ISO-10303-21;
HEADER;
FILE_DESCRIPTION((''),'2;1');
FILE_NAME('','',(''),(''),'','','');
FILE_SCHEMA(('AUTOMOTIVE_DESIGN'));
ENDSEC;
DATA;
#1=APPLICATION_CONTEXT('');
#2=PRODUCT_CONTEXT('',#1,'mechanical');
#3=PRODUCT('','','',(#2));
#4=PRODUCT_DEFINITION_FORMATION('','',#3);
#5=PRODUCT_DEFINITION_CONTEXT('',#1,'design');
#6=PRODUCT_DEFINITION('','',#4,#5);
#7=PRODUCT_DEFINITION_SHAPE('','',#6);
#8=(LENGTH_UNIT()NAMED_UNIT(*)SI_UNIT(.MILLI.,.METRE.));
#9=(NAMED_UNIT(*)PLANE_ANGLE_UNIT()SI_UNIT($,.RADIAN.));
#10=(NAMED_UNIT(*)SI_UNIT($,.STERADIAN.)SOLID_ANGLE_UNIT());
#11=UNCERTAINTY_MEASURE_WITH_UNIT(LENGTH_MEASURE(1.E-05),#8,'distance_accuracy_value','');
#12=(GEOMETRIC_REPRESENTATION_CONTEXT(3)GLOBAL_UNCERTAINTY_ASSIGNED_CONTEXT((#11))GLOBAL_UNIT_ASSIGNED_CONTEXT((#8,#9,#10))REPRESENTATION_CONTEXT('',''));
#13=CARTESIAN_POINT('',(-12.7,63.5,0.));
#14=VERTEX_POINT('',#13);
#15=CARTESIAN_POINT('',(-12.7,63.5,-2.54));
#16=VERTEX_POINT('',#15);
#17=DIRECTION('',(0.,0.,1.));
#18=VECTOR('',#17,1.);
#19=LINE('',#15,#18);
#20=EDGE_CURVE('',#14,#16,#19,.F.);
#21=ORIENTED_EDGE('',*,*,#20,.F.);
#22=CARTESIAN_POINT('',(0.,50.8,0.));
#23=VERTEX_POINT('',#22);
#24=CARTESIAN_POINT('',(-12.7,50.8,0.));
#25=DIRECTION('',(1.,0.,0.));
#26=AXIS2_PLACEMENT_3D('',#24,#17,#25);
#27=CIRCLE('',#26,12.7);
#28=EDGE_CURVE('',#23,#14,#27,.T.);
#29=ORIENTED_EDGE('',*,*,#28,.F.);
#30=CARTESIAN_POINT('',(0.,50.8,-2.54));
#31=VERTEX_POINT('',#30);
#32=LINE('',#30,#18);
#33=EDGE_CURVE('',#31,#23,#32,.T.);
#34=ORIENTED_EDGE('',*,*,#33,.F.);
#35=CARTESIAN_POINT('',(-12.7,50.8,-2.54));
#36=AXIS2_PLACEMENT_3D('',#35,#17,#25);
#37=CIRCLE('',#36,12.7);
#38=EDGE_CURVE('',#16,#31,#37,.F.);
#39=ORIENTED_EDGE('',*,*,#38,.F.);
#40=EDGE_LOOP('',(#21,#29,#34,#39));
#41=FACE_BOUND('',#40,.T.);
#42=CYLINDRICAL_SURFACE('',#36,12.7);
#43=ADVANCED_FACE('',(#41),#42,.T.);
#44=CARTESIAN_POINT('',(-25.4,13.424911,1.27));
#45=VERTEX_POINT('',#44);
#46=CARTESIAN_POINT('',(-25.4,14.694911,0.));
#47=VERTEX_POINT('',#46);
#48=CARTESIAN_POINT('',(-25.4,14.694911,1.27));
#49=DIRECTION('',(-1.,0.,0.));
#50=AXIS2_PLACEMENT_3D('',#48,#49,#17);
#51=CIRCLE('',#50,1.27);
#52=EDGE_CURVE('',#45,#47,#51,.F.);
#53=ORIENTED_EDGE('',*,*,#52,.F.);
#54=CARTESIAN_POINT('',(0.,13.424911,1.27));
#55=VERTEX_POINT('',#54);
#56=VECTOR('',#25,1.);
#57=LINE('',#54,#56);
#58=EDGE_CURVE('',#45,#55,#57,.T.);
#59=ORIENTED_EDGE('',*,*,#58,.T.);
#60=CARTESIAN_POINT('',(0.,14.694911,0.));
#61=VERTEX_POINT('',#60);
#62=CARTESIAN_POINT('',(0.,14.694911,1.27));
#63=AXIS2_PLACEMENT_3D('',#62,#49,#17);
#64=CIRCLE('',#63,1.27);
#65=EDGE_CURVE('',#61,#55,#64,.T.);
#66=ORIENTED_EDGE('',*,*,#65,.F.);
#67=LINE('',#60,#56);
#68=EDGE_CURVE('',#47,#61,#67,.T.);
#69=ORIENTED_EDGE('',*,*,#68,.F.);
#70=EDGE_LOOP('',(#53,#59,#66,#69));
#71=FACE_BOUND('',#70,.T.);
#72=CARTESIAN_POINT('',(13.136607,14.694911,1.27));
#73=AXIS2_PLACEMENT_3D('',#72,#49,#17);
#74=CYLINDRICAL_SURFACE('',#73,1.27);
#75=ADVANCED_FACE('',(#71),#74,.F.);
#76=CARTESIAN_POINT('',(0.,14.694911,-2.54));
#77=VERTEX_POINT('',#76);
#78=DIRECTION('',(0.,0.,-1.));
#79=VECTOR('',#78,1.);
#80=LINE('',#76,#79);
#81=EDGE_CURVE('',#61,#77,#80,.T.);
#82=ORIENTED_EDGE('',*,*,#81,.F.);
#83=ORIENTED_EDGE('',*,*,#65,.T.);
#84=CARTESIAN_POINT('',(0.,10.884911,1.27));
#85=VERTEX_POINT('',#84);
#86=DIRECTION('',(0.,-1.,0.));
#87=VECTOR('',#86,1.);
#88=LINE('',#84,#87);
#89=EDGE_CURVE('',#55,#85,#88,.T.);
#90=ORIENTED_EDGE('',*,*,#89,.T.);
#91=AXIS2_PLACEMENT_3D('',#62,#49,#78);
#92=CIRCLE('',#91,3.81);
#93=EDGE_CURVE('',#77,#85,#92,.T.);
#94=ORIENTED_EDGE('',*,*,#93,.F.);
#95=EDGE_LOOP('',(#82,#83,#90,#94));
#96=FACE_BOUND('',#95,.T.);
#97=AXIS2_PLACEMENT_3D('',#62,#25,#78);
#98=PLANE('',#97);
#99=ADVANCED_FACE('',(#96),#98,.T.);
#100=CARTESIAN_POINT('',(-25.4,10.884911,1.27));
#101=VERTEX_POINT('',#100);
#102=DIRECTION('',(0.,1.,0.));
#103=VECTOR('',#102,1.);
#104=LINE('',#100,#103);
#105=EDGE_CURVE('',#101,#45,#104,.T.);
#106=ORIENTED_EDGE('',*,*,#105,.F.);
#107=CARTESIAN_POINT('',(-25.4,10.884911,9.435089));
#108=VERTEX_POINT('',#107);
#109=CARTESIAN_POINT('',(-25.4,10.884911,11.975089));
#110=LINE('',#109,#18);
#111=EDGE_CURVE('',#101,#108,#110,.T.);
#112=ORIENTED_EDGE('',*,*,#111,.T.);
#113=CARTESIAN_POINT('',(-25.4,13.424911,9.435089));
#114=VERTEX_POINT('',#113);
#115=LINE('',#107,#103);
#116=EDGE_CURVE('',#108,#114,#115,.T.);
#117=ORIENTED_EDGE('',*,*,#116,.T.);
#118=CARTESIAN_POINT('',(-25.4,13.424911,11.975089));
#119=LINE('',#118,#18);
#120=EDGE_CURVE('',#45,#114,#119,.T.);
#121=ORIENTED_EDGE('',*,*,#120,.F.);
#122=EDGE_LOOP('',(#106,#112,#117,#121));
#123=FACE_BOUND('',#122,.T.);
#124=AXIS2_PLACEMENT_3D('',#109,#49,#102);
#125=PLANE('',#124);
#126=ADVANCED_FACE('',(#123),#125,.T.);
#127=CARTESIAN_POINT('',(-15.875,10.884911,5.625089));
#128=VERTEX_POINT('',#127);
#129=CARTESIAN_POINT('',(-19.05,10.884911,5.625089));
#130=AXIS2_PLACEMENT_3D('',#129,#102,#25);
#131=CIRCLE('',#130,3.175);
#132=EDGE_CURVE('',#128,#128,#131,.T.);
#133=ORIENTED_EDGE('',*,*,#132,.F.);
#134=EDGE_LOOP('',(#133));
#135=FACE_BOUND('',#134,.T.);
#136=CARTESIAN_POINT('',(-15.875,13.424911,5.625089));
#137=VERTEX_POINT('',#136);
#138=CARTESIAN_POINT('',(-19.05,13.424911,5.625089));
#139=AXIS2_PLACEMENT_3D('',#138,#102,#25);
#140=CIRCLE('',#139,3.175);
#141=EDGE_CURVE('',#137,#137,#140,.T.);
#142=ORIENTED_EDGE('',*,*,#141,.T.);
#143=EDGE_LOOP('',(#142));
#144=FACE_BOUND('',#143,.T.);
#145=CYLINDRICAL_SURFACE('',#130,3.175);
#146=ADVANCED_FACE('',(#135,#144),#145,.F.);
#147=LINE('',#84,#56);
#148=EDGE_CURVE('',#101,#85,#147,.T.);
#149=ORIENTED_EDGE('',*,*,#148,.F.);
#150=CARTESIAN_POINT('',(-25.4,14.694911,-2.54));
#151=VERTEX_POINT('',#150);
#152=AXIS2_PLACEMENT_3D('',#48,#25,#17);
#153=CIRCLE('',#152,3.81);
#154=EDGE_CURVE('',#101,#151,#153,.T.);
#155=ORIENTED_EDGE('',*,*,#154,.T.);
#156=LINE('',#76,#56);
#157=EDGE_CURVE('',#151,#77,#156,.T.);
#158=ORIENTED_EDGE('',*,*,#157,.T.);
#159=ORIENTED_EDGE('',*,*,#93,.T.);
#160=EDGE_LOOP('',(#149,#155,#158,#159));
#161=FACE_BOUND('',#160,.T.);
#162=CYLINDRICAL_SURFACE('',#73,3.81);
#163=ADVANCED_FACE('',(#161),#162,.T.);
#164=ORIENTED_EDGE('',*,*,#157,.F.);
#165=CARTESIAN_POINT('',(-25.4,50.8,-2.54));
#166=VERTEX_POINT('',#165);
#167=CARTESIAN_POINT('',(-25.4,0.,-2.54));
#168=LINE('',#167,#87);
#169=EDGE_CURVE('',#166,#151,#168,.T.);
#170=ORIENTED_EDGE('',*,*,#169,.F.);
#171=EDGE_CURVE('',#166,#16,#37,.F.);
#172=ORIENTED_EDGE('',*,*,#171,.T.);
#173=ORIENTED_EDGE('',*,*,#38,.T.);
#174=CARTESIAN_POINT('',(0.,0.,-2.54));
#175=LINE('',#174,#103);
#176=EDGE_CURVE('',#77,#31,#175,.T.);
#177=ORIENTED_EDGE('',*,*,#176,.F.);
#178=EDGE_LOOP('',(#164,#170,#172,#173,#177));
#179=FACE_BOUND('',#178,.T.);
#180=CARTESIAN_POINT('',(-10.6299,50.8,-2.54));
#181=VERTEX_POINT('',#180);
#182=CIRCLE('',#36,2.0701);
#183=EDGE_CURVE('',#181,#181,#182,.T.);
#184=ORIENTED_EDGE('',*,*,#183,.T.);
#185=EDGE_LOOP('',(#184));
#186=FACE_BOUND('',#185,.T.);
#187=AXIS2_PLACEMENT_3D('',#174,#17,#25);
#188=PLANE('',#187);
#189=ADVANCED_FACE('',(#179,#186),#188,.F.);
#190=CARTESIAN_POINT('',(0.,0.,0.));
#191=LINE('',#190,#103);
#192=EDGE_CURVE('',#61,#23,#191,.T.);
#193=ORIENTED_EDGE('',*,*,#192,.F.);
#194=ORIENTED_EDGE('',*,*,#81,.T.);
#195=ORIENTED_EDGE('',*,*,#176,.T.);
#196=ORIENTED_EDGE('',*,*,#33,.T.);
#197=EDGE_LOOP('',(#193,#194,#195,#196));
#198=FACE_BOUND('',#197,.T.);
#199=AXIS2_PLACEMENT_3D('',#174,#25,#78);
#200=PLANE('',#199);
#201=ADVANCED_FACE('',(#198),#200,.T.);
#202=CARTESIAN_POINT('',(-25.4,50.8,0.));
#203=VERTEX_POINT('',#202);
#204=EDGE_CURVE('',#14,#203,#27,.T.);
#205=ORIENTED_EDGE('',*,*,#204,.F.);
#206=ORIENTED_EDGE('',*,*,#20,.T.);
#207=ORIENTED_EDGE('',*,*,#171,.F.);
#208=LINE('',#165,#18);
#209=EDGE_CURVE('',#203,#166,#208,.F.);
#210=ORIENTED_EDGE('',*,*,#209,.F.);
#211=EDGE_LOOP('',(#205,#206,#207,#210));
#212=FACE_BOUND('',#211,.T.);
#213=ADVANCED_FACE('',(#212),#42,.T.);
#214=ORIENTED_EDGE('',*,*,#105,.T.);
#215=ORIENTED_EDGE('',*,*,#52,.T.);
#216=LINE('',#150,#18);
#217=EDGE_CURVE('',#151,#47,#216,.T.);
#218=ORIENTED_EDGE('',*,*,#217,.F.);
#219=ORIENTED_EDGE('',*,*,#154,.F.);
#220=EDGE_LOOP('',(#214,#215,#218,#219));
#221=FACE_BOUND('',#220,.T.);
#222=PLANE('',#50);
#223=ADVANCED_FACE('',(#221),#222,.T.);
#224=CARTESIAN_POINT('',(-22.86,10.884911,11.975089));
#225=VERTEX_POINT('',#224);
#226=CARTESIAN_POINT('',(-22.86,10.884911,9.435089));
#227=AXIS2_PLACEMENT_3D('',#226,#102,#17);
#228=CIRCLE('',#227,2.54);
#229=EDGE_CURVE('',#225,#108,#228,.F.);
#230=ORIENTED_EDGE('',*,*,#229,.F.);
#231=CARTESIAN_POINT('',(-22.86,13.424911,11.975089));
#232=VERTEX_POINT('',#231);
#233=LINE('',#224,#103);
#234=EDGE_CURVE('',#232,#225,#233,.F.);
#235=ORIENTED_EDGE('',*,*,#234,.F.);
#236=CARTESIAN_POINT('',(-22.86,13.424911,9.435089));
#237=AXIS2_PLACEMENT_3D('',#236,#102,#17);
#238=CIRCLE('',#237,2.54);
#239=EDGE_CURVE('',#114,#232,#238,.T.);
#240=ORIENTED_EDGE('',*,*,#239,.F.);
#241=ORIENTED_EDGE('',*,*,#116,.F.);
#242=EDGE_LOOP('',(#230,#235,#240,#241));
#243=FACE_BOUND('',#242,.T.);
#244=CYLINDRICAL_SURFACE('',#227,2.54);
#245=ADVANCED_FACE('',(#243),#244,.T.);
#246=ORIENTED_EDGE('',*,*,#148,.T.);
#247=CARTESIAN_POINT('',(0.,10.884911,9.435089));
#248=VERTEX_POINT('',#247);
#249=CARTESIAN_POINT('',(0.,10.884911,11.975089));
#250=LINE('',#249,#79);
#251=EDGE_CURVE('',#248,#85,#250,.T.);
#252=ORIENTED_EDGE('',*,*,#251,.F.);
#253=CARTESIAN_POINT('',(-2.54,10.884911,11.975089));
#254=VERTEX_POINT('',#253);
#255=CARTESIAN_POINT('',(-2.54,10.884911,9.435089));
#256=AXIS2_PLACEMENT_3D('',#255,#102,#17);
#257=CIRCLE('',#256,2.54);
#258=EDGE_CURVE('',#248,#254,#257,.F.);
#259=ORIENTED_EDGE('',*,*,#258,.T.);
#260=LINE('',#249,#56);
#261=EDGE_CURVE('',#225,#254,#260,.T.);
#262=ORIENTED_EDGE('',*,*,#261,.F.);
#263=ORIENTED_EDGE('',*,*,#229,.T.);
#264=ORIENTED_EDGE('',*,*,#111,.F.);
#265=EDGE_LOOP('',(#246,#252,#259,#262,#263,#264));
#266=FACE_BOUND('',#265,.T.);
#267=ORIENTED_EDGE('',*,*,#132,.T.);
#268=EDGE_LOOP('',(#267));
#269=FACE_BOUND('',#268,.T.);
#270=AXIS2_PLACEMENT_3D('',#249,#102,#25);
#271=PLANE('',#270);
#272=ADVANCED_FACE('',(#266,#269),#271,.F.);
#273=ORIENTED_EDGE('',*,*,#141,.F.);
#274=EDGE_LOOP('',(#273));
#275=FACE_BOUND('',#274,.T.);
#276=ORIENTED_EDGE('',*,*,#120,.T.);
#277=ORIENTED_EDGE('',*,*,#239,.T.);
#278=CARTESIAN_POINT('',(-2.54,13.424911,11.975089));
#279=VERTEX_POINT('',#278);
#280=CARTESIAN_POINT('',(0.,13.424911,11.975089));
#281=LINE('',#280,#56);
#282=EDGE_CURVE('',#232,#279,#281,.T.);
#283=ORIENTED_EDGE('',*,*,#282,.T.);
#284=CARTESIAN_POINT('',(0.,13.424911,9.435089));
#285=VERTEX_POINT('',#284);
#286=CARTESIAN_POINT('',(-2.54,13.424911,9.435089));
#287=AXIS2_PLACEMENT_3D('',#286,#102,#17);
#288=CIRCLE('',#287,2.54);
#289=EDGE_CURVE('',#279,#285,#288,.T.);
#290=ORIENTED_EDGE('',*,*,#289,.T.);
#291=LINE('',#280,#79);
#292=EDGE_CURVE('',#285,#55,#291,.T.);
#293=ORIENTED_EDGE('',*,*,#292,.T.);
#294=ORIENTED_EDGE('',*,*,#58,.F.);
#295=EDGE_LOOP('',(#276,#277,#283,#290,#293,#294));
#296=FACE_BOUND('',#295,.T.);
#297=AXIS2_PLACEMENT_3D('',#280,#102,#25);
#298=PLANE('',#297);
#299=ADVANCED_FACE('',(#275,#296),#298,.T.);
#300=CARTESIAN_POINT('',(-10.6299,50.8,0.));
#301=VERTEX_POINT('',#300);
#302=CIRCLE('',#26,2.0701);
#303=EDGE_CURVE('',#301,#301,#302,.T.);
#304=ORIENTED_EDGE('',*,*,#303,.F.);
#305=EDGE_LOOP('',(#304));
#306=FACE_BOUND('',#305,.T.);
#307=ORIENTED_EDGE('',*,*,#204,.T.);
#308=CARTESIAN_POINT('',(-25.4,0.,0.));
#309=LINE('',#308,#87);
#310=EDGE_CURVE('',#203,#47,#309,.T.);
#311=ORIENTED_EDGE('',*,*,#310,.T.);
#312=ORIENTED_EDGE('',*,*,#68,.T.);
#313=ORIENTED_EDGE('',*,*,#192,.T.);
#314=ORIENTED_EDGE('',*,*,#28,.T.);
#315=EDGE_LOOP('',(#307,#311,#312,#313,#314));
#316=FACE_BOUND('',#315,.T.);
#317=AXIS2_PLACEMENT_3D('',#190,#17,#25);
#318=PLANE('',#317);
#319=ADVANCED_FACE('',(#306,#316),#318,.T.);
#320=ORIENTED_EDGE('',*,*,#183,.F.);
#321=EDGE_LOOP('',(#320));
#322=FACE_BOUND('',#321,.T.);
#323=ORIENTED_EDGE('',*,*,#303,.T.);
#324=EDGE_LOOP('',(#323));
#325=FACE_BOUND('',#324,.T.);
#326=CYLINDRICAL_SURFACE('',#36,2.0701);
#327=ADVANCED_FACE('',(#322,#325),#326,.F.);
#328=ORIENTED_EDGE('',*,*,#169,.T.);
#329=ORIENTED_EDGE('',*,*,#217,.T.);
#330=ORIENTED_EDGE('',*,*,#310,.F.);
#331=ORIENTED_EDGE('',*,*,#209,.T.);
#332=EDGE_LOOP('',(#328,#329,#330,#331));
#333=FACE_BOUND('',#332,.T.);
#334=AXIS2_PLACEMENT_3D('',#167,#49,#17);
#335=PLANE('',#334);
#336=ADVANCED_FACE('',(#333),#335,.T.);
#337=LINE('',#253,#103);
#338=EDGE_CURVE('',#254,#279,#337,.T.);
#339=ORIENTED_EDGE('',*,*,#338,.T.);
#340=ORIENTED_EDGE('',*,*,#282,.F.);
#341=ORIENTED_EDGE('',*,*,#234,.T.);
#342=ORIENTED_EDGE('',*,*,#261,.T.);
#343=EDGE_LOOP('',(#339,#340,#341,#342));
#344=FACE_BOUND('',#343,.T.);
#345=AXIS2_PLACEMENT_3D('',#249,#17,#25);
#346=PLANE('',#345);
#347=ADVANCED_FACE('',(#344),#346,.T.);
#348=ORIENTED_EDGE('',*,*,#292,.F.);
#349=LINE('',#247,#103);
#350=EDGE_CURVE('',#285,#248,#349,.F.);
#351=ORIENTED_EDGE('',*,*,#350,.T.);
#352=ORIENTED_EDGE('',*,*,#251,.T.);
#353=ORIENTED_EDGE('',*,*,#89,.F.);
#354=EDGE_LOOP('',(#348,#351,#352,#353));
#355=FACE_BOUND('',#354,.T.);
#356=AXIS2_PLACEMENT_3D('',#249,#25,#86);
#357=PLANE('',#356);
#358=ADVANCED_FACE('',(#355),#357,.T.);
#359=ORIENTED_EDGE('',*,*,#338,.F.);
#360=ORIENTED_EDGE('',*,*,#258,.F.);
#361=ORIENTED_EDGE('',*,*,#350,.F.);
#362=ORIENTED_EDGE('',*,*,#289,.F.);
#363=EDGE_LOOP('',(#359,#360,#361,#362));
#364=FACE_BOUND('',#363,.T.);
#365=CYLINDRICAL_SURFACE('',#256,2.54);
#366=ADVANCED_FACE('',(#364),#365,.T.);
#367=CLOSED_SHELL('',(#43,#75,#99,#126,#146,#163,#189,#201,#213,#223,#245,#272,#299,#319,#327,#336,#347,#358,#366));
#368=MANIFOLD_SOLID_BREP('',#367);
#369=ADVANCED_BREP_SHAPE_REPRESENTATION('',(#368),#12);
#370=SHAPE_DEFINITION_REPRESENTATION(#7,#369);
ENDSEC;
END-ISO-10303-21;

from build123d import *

# Parameters (mm, degrees)
SKETCH1_W                  = 25.4
SKETCH1_H                  = 63.5
SKETCH1_R                  = 2.0701
SKETCH1_R_2                = 3.175
BASE_FLANGE1_DEPTH         = 2.54
SKETCHED_START             = -25.4
SKETCHED_BEND1_DEPTH       = 25.4
SKETCHED_START_2           = -15.8749999
SKETCHED_BEND1_2_DEPTH     = 15.8749999
SKETCHED_BEND1_3_DEPTH     = 3.1749999
SKETCHED_START_3           = -22.2250001
SKETCHED_BEND1_4_DEPTH     = 6.3500002
SKETCHED_START_4           = 10.884911335
SKETCHED_BEND1_5_OUTLINE_R = 3.175
SKETCHED_BEND1_5_DEPTH     = 2.54
FILLET1_R                  = 12.7
FILLET2_R                  = 2.54


with BuildPart() as part:
    # Base-Flange1: sheet metal written as solids
    # Sketch1 → Base-Flange1 (new body)
    with BuildSketch(Plane.XY):
        with Locations((-12.7, 31.75)):
            Rectangle(SKETCH1_W, SKETCH1_H)
        with Locations((-12.7, 50.8)):
            Circle(SKETCH1_R, mode=Mode.SUBTRACT)
        with Locations((-19.05, 6.35)):
            Circle(SKETCH1_R_2, mode=Mode.SUBTRACT)
    extrude(amount=-BASE_FLANGE1_DEPTH)

    # Sketched Bend1: read off the stored shape, not the designer's step
    # Sketched Bend1 outline → Sketched Bend1 (cut)
    with BuildSketch(Plane.YZ.offset(SKETCHED_START)):
        with BuildLine():
            ThreePointArc((14.694911335, -2.54), (12.49520681, -1.840851973), (11.102808887, 0))
            Line((11.102808887, 0), (0, 0))
            Line((0, 0), (0, -2.54))
            Line((0, -2.54), (14.694911335, -2.54))
        make_face()
    extrude(amount=SKETCHED_BEND1_DEPTH, mode=Mode.SUBTRACT)

    # Sketched Bend1 2 outline → Sketched Bend1 2 (add)
    with BuildSketch(Plane.YZ.offset(SKETCHED_START_2)):
        with BuildLine():
            Line((10.884911335, 11.975088665), (10.884911335, 1.27))
            ThreePointArc((10.884911335, 1.27), (10.939780823, 0.625721461), (11.102808887, 0))
            Line((11.102808887, 0), (14.694911335, 0))
            ThreePointArc((14.694911335, 0), (13.796885723, 0.371974388), (13.424911335, 1.27))
            Line((13.424911335, 1.27), (13.424911335, 11.975088665))
            Line((13.424911335, 11.975088665), (10.884911335, 11.975088665))
        make_face()
    extrude(amount=SKETCHED_BEND1_2_DEPTH)

    # Sketched Bend1 3 outline → Sketched Bend1 3 (add)
    with BuildSketch(Plane.YZ.offset(SKETCHED_START)):
        with BuildLine():
            Line((10.884911335, 11.975088665), (10.884911335, 1.27))
            ThreePointArc((10.884911335, 1.27), (10.939780823, 0.625721461), (11.102808887, 0))
            Line((11.102808887, 0), (14.694911335, 0))
            ThreePointArc((14.694911335, 0), (13.796885723, 0.371974388), (13.424911335, 1.27))
            Line((13.424911335, 1.27), (13.424911335, 11.975088665))
            Line((13.424911335, 11.975088665), (10.884911335, 11.975088665))
        make_face()
    extrude(amount=SKETCHED_BEND1_3_DEPTH)

    # Sketched Bend1 4 outline → Sketched Bend1 4 (add)
    with BuildSketch(Plane.YZ.offset(SKETCHED_START_3)):
        with BuildLine():
            Line((10.884911335, 11.975088665), (10.884911335, 1.27))
            ThreePointArc((10.884911335, 1.27), (10.939780823, 0.625721461), (11.102808887, 0))
            Line((11.102808887, 0), (14.694911335, 0))
            ThreePointArc((14.694911335, 0), (13.796885723, 0.371974388), (13.424911335, 1.27))
            Line((13.424911335, 1.27), (13.424911335, 11.975088665))
            Line((13.424911335, 11.975088665), (10.884911335, 11.975088665))
        make_face()
    extrude(amount=SKETCHED_BEND1_4_DEPTH)

    # Sketched Bend1 5 outline → Sketched Bend1 5 (cut)
    with BuildSketch(Plane(origin=(0, 0, 0), x_dir=(1, 0, 0), z_dir=(0, 1, 0)).offset(SKETCHED_START_4)):
        with Locations((-19.05, -5.625088665)):
            Circle(SKETCHED_BEND1_5_OUTLINE_R)
    extrude(amount=SKETCHED_BEND1_5_DEPTH, mode=Mode.SUBTRACT)

    # Fillet1
    fillet1_edges = [part.edges().sort_by_distance(p)[0] for p in [
        (-25.4, 63.5, -1.27),
        (0, 63.5, -1.27),
    ]]
    fillet(fillet1_edges, radius=FILLET1_R - 0.0001)  # a hair under: the kernel refuses the full size

    # Fillet2
    fillet2_edges = [part.edges().sort_by_distance(p)[0] for p in [
        (0, 12.154911335, 11.975088665),
        (-25.4, 12.154911335, 11.975088665),
    ]]
    fillet(fillet2_edges, radius=FILLET2_R)


solid = part.part
